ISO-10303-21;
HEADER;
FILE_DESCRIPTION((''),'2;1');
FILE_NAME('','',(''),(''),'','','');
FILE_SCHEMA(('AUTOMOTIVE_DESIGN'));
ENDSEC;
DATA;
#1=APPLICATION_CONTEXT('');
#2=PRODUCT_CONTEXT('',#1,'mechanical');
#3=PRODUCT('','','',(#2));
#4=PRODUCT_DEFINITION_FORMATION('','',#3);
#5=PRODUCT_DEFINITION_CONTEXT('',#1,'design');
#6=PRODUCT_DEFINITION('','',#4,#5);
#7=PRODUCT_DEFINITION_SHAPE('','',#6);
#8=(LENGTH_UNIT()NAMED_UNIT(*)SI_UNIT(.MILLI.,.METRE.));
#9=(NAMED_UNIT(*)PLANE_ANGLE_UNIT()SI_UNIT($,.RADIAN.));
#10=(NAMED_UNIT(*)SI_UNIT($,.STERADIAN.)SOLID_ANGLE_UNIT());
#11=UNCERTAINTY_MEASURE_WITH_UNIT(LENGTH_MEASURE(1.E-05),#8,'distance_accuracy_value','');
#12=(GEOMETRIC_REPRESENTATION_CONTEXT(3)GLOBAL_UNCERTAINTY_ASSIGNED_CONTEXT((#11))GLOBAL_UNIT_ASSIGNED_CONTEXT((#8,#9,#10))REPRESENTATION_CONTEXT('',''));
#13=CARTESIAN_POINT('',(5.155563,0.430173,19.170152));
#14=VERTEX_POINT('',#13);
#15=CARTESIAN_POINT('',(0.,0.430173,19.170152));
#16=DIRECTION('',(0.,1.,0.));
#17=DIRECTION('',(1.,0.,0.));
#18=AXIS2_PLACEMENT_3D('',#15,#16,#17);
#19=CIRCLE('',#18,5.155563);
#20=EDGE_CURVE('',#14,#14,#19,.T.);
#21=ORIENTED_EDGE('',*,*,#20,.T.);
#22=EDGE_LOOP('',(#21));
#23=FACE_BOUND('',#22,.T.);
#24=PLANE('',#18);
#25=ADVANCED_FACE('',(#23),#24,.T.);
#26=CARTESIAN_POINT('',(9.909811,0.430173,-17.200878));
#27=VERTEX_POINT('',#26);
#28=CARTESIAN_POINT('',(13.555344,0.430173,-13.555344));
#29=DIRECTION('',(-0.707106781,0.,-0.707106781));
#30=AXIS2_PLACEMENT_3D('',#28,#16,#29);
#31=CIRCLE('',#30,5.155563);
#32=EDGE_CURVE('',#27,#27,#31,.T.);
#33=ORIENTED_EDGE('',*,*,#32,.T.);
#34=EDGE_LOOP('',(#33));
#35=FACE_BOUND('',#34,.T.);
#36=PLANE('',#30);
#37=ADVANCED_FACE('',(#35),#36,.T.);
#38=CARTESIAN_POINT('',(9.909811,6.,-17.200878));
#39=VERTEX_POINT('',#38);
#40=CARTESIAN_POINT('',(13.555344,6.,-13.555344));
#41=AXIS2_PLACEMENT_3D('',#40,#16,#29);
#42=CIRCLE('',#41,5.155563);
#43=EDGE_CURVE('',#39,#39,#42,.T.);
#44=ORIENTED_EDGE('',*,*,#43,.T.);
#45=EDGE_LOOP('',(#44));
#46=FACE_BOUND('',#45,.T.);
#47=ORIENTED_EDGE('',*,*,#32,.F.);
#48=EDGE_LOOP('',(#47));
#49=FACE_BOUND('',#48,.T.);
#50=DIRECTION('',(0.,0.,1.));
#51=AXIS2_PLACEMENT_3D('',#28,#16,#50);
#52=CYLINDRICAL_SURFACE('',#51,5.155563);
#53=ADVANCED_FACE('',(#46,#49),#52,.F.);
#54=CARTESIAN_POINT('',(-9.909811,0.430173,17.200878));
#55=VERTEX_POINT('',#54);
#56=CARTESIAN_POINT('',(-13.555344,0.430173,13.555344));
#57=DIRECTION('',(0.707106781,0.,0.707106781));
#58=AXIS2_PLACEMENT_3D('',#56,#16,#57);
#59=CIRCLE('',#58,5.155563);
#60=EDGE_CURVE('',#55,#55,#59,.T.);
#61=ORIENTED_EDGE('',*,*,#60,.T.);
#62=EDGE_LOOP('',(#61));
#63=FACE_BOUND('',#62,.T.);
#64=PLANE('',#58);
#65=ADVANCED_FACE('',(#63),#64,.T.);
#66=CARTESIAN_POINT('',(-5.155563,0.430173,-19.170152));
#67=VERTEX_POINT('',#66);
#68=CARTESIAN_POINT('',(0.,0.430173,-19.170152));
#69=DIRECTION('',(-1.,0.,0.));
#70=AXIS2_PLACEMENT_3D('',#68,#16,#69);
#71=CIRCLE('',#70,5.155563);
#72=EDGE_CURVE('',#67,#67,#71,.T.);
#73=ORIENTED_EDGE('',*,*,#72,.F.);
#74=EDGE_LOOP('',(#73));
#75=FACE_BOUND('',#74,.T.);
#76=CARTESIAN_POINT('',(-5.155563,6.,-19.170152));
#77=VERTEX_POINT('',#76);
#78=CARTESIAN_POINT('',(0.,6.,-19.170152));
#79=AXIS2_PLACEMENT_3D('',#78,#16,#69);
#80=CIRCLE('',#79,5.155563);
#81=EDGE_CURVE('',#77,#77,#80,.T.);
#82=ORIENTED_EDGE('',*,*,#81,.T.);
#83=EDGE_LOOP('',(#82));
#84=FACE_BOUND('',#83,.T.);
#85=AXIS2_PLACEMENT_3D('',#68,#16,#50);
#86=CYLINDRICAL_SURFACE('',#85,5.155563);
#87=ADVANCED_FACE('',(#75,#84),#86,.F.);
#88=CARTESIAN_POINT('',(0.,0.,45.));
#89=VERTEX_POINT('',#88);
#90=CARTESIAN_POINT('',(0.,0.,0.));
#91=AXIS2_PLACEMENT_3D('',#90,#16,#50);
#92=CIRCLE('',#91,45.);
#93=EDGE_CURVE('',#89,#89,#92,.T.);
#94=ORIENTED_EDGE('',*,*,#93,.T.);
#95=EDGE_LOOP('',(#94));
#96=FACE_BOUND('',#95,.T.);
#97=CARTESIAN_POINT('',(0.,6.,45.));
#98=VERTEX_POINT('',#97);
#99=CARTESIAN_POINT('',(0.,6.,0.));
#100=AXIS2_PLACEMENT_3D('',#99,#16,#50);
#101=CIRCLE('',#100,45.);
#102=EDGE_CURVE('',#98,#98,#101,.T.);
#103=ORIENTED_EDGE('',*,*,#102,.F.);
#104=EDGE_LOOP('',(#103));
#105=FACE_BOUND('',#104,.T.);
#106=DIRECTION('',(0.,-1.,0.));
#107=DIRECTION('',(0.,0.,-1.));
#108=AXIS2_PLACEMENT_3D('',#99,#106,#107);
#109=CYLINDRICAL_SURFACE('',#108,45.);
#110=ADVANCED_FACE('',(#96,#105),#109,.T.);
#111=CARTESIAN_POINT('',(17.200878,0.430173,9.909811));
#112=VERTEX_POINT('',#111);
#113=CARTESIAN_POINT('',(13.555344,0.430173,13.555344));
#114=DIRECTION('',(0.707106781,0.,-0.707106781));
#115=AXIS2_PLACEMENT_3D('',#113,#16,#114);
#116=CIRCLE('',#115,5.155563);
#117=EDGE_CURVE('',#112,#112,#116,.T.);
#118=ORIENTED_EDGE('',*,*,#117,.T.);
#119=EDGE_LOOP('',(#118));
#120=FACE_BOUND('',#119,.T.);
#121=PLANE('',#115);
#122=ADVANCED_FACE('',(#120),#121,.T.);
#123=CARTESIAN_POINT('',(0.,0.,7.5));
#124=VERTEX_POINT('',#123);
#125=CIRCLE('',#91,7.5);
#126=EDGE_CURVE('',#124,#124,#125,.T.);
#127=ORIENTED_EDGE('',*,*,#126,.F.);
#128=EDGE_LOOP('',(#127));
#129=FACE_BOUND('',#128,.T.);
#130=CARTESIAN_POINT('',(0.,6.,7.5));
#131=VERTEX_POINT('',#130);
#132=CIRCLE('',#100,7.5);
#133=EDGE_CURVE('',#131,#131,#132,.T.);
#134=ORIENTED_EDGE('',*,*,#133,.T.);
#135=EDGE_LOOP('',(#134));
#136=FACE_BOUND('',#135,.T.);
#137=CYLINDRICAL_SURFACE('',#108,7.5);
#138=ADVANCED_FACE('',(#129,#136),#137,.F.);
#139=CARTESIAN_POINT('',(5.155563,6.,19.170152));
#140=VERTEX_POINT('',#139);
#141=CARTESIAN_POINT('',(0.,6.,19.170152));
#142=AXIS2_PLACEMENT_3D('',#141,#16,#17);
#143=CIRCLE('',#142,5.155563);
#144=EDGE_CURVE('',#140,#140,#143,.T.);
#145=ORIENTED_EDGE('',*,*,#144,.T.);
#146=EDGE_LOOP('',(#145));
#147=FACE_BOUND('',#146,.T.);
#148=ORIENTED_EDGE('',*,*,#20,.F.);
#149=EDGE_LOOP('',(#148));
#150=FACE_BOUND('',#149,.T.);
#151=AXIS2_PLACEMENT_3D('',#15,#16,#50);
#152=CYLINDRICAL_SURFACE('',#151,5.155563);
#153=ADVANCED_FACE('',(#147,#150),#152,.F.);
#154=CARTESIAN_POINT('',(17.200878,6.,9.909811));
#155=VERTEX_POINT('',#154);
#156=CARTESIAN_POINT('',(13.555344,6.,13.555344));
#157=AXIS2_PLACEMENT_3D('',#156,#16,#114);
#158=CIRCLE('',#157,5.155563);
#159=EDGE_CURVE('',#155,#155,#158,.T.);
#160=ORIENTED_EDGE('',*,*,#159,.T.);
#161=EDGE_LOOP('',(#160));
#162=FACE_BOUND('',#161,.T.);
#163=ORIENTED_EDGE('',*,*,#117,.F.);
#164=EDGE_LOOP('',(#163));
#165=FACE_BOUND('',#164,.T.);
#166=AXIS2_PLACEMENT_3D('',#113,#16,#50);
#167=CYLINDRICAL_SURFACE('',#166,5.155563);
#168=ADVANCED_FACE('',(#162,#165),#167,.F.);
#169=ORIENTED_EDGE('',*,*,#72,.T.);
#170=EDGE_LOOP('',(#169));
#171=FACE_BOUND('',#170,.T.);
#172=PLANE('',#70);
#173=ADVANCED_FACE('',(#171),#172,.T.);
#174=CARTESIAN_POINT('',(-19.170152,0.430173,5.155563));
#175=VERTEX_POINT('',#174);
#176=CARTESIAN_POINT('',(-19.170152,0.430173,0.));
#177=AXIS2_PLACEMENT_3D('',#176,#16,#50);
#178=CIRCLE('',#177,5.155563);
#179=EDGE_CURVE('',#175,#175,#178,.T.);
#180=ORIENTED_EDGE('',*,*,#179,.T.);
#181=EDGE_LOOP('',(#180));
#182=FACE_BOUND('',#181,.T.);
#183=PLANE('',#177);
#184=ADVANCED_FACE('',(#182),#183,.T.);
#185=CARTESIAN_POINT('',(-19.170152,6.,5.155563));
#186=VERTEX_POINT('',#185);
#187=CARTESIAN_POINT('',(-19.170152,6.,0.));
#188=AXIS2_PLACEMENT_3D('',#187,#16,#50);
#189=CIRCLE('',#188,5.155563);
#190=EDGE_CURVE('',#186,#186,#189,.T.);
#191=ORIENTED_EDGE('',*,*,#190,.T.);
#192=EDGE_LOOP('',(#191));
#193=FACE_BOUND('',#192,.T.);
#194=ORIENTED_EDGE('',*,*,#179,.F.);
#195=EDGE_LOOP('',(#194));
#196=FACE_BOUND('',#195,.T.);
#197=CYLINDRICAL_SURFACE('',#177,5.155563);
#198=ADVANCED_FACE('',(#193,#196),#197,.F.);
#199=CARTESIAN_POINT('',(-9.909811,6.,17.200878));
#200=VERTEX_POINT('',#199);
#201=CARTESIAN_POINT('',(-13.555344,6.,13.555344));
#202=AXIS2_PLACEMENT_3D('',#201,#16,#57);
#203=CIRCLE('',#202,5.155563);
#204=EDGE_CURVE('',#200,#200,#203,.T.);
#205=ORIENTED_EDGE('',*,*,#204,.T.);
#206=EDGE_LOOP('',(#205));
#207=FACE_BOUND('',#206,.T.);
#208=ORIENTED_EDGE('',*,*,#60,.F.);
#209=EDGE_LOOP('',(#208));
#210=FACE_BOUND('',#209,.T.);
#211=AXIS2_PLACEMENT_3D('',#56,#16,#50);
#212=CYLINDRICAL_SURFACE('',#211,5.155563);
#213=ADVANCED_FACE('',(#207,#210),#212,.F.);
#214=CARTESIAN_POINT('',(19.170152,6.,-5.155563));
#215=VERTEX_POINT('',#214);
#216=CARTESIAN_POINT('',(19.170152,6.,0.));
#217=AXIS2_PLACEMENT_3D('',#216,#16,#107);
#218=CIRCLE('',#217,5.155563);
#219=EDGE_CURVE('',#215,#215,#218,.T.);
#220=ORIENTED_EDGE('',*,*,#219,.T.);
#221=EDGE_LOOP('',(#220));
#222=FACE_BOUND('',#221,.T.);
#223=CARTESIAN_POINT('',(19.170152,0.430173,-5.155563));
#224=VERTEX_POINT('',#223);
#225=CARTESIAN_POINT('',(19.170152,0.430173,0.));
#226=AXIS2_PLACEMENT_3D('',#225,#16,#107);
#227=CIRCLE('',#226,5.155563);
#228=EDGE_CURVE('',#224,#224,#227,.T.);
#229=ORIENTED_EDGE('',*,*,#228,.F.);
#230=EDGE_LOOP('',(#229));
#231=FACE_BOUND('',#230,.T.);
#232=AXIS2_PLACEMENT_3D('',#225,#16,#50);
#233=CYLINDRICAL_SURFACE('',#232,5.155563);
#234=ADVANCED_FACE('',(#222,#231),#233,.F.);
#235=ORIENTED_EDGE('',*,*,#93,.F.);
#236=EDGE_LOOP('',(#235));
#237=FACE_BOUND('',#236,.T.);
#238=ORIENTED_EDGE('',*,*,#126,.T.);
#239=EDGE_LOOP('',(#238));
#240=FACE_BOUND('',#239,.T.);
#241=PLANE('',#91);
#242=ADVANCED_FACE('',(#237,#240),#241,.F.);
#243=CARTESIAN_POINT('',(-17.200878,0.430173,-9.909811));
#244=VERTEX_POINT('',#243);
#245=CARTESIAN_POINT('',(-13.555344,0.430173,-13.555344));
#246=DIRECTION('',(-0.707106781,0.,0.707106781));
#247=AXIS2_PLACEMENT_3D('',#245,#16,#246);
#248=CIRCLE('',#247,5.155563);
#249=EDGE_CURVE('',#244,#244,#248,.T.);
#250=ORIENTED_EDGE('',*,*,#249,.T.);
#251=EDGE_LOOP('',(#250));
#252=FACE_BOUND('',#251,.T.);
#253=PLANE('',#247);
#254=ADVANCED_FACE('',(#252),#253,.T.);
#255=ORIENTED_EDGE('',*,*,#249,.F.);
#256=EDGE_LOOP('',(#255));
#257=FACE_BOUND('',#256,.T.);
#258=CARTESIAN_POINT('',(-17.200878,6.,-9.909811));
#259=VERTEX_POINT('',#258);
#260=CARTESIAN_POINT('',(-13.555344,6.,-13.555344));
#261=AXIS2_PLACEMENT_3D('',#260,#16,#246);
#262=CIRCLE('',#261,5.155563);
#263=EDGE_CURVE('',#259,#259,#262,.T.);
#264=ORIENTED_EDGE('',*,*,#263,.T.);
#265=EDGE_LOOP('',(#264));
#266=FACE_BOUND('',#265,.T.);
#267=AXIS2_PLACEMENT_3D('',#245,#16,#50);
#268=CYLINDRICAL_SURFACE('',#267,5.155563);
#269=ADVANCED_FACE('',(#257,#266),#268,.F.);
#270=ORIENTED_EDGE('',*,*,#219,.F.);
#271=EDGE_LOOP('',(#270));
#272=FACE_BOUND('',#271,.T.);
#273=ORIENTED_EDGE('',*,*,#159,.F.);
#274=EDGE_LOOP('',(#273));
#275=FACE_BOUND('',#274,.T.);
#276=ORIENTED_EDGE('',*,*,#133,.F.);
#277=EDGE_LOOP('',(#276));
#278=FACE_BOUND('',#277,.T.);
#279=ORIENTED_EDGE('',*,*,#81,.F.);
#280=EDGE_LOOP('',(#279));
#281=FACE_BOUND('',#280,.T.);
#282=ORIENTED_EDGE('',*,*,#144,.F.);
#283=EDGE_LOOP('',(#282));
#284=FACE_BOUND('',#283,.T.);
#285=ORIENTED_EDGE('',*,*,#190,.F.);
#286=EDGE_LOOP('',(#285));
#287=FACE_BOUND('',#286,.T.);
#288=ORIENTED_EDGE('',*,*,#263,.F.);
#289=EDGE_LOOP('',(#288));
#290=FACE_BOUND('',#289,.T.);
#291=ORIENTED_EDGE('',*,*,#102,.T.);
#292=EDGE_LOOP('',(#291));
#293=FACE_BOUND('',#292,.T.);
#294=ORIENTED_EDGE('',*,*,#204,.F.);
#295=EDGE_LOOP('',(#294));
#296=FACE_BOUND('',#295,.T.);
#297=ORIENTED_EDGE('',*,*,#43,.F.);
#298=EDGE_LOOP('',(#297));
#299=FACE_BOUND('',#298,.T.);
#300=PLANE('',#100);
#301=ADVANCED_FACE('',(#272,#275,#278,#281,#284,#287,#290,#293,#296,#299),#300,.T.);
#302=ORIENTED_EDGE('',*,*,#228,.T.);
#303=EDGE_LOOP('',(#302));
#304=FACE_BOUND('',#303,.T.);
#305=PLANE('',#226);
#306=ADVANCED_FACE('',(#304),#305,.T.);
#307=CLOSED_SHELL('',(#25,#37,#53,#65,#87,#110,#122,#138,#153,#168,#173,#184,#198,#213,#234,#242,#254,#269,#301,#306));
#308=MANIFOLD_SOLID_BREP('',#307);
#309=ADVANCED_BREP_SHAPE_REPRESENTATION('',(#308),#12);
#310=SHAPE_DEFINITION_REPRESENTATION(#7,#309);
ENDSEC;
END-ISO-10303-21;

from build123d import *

# Parameters (mm, degrees)
SKETCH1_R           = 45
BOSS_EXTRUDE1_DEPTH = 6
SKETCH2_R           = 7.5
CUT_EXTRUDE1_DEPTH  = 64.921827258
SKETCH3_R           = 5.155562803
CUT_EXTRUDE2_DEPTH  = 5.569826726
CIRPATTERN1_COUNT   = 8


with BuildPart() as part:
    # Sketch1 → Boss-Extrude1 (new body)
    with BuildSketch(Plane(origin=(0, 0, 0), x_dir=(1, 0, 0), z_dir=(0, 1, 0))):
        Circle(SKETCH1_R)
    extrude(amount=BOSS_EXTRUDE1_DEPTH)

    # Sketch2 → Cut-Extrude1 (cut, through all)
    with BuildSketch(Plane(origin=(0, 0, 0), x_dir=(1, 0, 0), z_dir=(0, 1, 0))):
        Circle(SKETCH2_R)
    extrude(amount=CUT_EXTRUDE1_DEPTH, mode=Mode.SUBTRACT)

    # Sketch3 → Cut-Extrude2 (cut)
    with BuildSketch(Plane(origin=(0, 6, 0), x_dir=(1, 0, 0), z_dir=(0, 1, 0))):
        with Locations((-19.170152002, 0)):
            Circle(SKETCH3_R)
    cut_extrude2 = extrude(amount=-CUT_EXTRUDE2_DEPTH, mode=Mode.SUBTRACT)

    # CirPattern1: Cut-Extrude2 ×8 about axis
    cirpattern1_axis = Axis((0, 0, 0), (0, 1, 0))
    for i in range(1, CIRPATTERN1_COUNT):
        add(cut_extrude2.rotate(cirpattern1_axis, i * 360 / CIRPATTERN1_COUNT), mode=Mode.SUBTRACT)


solid = part.part
